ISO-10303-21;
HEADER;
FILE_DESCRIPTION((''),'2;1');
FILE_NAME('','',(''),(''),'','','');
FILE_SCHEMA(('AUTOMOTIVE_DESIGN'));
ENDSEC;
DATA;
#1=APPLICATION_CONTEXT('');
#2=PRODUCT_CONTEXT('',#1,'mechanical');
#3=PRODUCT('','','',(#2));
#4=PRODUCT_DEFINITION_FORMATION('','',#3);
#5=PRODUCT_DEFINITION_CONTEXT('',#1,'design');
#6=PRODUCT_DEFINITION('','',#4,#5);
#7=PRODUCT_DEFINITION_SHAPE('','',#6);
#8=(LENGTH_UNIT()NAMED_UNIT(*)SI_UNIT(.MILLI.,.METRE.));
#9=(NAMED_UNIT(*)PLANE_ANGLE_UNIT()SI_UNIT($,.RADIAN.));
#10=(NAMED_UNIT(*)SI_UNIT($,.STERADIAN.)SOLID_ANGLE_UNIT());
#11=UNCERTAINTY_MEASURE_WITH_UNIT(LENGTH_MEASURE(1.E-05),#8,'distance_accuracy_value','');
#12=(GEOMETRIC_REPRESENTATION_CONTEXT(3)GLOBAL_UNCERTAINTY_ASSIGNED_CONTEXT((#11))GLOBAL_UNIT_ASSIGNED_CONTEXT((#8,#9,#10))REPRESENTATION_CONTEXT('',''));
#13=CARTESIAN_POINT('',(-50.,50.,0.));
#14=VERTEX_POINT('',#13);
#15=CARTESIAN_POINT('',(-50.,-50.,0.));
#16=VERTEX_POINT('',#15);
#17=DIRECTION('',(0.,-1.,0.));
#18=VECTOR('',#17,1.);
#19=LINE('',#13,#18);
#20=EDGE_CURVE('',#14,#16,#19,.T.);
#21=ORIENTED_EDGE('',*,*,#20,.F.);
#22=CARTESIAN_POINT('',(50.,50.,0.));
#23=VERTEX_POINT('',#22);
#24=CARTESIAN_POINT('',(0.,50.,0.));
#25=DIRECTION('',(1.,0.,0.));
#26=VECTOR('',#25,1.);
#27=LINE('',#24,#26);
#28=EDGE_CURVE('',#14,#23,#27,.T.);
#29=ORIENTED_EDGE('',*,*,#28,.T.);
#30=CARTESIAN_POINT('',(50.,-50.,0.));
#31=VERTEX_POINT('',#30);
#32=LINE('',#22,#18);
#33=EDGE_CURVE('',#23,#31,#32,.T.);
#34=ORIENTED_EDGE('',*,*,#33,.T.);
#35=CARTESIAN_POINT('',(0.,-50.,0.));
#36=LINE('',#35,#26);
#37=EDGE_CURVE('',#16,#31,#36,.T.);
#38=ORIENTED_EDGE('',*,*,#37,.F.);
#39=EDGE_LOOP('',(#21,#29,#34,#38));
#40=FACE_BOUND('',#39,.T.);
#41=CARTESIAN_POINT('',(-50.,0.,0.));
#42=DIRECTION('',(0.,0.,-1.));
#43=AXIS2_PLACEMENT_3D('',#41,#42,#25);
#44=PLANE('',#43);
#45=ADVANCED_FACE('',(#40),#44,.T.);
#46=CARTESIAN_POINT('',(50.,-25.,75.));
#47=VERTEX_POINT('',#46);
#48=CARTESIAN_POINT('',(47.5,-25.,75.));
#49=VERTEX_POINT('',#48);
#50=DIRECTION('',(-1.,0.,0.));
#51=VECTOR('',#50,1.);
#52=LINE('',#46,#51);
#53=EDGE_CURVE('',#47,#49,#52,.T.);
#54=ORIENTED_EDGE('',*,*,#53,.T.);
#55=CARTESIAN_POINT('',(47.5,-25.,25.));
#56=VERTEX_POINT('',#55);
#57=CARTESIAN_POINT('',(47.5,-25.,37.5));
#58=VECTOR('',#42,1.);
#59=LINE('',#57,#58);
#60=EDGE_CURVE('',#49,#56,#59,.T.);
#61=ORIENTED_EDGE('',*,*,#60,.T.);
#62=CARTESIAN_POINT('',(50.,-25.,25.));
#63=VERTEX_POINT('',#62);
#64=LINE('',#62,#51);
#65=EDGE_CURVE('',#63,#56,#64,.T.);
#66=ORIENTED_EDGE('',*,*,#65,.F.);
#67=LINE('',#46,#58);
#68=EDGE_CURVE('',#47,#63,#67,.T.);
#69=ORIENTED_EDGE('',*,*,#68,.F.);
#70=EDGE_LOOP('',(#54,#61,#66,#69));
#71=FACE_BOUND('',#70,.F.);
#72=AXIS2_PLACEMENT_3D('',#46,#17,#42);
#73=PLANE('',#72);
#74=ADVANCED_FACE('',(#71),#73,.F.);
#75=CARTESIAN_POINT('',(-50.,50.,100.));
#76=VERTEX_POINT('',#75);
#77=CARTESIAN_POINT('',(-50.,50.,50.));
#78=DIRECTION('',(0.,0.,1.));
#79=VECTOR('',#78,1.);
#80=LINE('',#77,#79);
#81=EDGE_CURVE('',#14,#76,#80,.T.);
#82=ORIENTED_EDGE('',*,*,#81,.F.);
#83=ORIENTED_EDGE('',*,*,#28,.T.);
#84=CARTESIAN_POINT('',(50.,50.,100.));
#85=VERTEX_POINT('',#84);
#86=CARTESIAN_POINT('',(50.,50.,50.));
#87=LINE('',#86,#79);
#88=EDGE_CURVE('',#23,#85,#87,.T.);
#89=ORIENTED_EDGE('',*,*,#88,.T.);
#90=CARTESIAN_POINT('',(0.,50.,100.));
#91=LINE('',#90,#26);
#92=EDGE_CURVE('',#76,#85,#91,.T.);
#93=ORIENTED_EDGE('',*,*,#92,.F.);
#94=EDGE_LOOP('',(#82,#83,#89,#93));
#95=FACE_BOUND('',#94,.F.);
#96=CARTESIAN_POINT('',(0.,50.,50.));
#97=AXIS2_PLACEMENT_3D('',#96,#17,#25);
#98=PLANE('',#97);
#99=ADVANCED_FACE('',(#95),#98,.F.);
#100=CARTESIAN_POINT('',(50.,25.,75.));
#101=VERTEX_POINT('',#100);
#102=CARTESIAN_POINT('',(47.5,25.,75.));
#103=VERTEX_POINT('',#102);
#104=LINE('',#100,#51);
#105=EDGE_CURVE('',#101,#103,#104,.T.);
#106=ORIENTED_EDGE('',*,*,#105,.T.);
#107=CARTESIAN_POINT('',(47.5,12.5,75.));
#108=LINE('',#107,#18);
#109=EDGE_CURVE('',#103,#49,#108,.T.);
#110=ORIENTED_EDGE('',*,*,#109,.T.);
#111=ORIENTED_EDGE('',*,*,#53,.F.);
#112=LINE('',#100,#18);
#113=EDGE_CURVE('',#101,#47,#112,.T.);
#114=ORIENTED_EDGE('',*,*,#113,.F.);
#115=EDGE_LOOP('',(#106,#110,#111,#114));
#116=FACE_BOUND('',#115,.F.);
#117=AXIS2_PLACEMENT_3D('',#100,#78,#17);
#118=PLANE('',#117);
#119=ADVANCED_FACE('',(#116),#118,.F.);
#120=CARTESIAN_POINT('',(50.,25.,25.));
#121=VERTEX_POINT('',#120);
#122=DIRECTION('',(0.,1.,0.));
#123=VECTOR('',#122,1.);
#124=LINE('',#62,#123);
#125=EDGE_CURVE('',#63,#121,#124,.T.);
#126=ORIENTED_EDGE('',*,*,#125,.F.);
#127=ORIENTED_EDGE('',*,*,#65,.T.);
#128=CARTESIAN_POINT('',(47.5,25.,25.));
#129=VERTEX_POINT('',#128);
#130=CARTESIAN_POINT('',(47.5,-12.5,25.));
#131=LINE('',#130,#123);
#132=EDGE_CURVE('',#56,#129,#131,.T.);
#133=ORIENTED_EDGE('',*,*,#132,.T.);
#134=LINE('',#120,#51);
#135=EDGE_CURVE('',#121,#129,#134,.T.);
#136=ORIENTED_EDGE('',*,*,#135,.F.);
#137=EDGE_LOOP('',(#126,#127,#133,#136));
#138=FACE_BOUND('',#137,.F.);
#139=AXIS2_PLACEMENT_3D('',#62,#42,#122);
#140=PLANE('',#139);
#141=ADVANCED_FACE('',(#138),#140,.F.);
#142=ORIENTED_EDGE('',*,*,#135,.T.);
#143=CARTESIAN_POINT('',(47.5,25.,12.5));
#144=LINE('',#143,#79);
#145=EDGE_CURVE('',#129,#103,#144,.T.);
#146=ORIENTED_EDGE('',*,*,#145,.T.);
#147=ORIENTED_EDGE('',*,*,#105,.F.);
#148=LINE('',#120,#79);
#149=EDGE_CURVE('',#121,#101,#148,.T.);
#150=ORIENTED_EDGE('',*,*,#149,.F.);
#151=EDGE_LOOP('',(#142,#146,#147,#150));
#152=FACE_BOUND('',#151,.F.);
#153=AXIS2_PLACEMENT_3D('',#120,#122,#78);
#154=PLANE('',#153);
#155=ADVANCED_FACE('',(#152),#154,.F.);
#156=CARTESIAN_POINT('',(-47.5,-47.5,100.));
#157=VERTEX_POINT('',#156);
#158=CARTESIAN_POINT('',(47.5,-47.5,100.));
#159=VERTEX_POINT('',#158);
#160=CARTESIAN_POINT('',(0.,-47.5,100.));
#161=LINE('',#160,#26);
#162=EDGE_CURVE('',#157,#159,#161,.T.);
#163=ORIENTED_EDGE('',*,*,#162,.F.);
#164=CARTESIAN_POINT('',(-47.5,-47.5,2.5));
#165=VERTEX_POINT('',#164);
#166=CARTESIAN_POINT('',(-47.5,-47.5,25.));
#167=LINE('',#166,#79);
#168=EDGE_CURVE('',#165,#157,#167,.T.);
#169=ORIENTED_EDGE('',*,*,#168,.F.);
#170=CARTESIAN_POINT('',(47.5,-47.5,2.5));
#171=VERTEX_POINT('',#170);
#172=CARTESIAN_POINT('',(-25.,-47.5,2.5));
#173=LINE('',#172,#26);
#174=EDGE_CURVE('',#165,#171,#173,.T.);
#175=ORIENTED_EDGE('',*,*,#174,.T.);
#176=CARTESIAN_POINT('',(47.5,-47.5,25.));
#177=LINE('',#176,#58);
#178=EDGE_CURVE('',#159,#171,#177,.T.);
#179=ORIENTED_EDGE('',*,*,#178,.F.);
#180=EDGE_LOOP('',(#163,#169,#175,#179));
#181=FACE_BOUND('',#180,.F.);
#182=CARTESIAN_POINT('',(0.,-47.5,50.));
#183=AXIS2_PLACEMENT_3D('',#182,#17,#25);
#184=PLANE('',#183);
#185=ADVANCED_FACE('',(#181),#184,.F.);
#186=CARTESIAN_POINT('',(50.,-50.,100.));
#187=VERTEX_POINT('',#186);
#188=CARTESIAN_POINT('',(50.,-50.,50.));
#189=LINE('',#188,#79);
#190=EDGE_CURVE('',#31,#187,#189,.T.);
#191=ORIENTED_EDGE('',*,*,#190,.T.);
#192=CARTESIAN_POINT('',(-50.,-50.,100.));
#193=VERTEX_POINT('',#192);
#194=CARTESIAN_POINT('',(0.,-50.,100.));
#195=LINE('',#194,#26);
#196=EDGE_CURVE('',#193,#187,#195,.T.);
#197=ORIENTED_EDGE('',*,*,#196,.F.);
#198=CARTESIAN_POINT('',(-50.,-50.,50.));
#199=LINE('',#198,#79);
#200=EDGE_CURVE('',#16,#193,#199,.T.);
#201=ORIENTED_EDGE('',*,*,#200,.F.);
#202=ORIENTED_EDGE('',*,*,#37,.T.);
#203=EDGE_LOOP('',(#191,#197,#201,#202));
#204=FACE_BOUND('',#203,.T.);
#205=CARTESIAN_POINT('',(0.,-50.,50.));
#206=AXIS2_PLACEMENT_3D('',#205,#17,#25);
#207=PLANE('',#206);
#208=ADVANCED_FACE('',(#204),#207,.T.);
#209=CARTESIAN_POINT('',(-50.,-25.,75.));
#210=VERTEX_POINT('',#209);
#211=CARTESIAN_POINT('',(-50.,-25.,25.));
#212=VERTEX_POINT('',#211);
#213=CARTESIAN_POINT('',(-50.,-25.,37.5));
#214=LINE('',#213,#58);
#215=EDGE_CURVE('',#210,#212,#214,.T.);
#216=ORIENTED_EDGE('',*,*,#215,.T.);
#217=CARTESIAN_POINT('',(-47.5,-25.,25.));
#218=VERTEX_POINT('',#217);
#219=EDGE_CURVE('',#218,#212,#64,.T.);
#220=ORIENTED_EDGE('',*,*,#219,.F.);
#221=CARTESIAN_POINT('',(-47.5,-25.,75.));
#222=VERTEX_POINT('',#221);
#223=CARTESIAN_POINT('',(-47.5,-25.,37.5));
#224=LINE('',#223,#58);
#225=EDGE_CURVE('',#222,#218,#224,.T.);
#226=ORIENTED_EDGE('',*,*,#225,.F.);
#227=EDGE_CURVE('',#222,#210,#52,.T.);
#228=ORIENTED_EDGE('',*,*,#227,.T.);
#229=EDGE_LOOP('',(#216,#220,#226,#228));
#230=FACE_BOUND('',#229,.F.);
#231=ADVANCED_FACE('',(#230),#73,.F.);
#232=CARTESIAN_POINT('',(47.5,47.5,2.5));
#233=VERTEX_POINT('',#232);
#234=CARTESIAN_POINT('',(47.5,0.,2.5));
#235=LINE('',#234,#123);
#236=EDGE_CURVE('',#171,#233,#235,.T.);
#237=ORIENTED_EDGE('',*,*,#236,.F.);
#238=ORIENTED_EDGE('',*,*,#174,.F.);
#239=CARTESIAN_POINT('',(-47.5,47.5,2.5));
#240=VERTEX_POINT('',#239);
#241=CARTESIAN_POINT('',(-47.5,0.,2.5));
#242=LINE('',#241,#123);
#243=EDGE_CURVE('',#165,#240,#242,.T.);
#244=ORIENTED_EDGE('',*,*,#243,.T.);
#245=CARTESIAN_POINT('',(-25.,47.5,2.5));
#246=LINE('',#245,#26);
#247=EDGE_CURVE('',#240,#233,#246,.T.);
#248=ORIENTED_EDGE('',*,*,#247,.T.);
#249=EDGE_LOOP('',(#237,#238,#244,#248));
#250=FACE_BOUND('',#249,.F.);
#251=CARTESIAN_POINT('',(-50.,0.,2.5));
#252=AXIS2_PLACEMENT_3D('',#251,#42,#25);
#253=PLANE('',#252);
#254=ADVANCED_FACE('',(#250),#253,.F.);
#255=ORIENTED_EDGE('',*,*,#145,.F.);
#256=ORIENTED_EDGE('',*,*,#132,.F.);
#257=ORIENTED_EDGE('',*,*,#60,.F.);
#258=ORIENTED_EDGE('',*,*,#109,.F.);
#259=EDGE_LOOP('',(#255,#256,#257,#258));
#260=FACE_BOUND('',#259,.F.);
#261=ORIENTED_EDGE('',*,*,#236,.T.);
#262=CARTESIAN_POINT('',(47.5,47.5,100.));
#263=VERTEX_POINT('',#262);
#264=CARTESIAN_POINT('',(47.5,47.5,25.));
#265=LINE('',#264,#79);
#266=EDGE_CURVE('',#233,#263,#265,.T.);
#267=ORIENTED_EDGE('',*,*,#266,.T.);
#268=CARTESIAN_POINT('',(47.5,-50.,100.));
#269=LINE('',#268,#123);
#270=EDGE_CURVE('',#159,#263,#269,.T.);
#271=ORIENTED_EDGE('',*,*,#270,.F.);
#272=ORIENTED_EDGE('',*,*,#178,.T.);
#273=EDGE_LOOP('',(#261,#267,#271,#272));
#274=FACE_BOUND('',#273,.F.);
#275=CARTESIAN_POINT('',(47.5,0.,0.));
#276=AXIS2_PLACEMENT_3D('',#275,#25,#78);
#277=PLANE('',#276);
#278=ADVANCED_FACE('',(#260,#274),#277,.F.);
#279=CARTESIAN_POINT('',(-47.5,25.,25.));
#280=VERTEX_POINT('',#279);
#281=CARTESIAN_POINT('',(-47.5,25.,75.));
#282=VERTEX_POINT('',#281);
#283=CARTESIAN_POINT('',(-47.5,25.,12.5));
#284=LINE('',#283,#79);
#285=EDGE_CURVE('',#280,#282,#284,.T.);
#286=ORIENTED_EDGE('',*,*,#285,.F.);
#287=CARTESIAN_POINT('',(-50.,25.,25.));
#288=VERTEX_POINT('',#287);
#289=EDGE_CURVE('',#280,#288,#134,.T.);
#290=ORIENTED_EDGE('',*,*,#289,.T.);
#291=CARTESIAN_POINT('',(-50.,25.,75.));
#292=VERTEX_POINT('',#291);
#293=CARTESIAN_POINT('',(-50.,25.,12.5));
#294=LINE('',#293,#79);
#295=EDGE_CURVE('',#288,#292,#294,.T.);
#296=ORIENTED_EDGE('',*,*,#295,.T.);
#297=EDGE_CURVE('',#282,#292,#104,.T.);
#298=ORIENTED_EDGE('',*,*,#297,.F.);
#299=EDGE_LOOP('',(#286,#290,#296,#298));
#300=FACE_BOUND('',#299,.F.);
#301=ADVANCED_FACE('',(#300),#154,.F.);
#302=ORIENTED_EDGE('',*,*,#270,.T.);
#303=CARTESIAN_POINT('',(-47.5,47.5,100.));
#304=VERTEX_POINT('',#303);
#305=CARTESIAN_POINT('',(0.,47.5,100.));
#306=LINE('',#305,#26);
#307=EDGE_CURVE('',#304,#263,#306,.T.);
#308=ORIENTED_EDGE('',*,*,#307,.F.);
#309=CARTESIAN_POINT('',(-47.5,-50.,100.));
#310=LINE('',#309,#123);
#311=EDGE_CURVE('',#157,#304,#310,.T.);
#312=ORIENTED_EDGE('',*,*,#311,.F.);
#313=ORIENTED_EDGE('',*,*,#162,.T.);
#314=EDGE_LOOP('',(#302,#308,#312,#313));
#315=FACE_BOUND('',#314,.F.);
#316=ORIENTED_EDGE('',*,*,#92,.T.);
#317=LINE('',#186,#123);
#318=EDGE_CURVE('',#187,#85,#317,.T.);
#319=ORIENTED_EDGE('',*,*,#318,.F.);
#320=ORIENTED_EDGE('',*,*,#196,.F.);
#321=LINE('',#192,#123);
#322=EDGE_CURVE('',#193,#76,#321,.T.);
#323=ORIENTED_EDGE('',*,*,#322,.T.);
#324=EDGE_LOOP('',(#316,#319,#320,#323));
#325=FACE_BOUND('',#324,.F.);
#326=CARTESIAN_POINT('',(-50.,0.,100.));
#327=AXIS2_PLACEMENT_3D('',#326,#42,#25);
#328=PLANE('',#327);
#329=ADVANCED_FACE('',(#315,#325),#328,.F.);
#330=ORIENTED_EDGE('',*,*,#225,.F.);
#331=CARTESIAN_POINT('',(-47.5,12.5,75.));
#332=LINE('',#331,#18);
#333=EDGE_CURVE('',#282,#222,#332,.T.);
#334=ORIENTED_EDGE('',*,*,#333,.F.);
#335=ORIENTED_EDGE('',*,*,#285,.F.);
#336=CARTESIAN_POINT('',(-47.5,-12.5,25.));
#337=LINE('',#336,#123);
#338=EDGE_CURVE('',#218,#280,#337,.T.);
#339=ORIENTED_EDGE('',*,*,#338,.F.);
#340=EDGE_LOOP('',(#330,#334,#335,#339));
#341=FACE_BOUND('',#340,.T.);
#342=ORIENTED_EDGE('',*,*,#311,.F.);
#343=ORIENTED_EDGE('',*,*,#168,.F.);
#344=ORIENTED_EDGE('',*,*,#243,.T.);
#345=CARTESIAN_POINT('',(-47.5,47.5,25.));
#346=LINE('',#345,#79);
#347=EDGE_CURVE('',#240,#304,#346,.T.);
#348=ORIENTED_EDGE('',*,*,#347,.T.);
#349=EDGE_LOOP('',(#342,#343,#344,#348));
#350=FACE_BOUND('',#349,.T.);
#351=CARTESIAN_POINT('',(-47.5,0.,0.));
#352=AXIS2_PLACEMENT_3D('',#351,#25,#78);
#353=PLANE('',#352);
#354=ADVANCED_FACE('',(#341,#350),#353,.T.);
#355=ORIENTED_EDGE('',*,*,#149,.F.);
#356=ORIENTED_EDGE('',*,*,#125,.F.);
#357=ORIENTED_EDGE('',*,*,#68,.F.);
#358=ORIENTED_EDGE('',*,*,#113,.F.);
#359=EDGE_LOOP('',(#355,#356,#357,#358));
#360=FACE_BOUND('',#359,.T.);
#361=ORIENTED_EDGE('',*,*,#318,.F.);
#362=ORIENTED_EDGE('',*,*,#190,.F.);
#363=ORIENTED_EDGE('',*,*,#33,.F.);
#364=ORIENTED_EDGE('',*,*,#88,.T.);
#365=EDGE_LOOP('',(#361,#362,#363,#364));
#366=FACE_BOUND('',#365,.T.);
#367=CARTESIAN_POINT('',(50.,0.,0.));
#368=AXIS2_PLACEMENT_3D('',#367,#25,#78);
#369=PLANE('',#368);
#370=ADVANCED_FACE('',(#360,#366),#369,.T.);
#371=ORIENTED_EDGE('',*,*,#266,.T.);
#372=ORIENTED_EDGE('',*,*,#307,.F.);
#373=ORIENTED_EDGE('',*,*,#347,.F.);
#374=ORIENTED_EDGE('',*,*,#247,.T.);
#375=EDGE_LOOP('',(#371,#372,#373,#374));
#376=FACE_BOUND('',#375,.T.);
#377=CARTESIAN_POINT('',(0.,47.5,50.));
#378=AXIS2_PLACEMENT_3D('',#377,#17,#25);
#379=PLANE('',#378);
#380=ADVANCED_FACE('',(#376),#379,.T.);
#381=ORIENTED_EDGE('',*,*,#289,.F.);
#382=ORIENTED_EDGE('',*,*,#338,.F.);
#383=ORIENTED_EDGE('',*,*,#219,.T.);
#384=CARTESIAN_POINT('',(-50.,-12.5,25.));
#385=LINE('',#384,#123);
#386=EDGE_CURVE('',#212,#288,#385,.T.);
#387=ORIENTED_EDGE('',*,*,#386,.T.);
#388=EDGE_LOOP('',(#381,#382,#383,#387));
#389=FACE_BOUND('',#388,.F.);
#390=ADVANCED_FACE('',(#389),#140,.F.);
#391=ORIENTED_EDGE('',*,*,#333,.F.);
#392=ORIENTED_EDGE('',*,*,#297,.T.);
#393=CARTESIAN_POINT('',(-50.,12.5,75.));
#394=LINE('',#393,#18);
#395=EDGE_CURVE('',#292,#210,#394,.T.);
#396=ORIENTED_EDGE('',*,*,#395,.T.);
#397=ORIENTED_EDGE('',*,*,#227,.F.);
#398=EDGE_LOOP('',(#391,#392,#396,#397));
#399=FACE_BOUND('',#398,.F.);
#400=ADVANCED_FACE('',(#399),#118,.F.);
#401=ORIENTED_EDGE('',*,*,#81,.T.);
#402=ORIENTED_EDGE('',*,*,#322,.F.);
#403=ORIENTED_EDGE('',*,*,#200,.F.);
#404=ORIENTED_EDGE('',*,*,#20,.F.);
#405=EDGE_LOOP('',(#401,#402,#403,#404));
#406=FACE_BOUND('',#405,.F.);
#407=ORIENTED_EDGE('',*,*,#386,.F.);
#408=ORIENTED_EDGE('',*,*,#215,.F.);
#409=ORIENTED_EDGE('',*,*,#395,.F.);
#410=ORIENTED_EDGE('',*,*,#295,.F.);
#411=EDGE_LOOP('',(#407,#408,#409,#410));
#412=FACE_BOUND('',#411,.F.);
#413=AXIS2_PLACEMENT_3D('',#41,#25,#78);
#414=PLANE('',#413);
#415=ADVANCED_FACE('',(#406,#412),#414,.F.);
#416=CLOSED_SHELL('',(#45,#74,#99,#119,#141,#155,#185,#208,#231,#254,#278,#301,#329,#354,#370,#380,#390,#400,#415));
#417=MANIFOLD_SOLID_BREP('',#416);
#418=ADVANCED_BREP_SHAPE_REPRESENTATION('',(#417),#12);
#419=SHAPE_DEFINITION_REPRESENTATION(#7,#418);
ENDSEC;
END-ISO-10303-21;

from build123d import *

# Parameters (mm, degrees)
F0_W     = 100
F0_H     = 100
F2_DEPTH = 50
F3_DEPTH = 50
F4_T     = -2.5
F8_DEPTH = 100.001


# Not quite as in the source:
# - a feature names something its author has since deleted; it is built from what else it names


with BuildPart() as f2:
    # F0 (on Front) → F2 (new body)
    with BuildSketch(Plane.XZ):
        with Locations((0, 50)):
            Rectangle(F0_W, F0_H)
    extrude(amount=F2_DEPTH)

    # F3 (add): a face of the model
    f3_faces = [f2.faces().sort_by_distance(p)[0] for p in [
        (0, 0, 50),
    ]]
    extrude(f3_faces, amount=F3_DEPTH)

    # F4
    f4_openings = [f2.faces().sort_by_distance(p)[0] for p in [
        (0, 0, 100),
    ]]
    offset(amount=F4_T, openings=f4_openings)

    # F7 (on offset) → F8 (cut, through all)
    with BuildSketch(Plane.YZ.offset(50)):
        Polygon((25, 75), (-25, 75), (-25, 25), (0, 25), (25, 25), align=None)
    extrude(amount=-F8_DEPTH, mode=Mode.SUBTRACT)


solid = f2.part
